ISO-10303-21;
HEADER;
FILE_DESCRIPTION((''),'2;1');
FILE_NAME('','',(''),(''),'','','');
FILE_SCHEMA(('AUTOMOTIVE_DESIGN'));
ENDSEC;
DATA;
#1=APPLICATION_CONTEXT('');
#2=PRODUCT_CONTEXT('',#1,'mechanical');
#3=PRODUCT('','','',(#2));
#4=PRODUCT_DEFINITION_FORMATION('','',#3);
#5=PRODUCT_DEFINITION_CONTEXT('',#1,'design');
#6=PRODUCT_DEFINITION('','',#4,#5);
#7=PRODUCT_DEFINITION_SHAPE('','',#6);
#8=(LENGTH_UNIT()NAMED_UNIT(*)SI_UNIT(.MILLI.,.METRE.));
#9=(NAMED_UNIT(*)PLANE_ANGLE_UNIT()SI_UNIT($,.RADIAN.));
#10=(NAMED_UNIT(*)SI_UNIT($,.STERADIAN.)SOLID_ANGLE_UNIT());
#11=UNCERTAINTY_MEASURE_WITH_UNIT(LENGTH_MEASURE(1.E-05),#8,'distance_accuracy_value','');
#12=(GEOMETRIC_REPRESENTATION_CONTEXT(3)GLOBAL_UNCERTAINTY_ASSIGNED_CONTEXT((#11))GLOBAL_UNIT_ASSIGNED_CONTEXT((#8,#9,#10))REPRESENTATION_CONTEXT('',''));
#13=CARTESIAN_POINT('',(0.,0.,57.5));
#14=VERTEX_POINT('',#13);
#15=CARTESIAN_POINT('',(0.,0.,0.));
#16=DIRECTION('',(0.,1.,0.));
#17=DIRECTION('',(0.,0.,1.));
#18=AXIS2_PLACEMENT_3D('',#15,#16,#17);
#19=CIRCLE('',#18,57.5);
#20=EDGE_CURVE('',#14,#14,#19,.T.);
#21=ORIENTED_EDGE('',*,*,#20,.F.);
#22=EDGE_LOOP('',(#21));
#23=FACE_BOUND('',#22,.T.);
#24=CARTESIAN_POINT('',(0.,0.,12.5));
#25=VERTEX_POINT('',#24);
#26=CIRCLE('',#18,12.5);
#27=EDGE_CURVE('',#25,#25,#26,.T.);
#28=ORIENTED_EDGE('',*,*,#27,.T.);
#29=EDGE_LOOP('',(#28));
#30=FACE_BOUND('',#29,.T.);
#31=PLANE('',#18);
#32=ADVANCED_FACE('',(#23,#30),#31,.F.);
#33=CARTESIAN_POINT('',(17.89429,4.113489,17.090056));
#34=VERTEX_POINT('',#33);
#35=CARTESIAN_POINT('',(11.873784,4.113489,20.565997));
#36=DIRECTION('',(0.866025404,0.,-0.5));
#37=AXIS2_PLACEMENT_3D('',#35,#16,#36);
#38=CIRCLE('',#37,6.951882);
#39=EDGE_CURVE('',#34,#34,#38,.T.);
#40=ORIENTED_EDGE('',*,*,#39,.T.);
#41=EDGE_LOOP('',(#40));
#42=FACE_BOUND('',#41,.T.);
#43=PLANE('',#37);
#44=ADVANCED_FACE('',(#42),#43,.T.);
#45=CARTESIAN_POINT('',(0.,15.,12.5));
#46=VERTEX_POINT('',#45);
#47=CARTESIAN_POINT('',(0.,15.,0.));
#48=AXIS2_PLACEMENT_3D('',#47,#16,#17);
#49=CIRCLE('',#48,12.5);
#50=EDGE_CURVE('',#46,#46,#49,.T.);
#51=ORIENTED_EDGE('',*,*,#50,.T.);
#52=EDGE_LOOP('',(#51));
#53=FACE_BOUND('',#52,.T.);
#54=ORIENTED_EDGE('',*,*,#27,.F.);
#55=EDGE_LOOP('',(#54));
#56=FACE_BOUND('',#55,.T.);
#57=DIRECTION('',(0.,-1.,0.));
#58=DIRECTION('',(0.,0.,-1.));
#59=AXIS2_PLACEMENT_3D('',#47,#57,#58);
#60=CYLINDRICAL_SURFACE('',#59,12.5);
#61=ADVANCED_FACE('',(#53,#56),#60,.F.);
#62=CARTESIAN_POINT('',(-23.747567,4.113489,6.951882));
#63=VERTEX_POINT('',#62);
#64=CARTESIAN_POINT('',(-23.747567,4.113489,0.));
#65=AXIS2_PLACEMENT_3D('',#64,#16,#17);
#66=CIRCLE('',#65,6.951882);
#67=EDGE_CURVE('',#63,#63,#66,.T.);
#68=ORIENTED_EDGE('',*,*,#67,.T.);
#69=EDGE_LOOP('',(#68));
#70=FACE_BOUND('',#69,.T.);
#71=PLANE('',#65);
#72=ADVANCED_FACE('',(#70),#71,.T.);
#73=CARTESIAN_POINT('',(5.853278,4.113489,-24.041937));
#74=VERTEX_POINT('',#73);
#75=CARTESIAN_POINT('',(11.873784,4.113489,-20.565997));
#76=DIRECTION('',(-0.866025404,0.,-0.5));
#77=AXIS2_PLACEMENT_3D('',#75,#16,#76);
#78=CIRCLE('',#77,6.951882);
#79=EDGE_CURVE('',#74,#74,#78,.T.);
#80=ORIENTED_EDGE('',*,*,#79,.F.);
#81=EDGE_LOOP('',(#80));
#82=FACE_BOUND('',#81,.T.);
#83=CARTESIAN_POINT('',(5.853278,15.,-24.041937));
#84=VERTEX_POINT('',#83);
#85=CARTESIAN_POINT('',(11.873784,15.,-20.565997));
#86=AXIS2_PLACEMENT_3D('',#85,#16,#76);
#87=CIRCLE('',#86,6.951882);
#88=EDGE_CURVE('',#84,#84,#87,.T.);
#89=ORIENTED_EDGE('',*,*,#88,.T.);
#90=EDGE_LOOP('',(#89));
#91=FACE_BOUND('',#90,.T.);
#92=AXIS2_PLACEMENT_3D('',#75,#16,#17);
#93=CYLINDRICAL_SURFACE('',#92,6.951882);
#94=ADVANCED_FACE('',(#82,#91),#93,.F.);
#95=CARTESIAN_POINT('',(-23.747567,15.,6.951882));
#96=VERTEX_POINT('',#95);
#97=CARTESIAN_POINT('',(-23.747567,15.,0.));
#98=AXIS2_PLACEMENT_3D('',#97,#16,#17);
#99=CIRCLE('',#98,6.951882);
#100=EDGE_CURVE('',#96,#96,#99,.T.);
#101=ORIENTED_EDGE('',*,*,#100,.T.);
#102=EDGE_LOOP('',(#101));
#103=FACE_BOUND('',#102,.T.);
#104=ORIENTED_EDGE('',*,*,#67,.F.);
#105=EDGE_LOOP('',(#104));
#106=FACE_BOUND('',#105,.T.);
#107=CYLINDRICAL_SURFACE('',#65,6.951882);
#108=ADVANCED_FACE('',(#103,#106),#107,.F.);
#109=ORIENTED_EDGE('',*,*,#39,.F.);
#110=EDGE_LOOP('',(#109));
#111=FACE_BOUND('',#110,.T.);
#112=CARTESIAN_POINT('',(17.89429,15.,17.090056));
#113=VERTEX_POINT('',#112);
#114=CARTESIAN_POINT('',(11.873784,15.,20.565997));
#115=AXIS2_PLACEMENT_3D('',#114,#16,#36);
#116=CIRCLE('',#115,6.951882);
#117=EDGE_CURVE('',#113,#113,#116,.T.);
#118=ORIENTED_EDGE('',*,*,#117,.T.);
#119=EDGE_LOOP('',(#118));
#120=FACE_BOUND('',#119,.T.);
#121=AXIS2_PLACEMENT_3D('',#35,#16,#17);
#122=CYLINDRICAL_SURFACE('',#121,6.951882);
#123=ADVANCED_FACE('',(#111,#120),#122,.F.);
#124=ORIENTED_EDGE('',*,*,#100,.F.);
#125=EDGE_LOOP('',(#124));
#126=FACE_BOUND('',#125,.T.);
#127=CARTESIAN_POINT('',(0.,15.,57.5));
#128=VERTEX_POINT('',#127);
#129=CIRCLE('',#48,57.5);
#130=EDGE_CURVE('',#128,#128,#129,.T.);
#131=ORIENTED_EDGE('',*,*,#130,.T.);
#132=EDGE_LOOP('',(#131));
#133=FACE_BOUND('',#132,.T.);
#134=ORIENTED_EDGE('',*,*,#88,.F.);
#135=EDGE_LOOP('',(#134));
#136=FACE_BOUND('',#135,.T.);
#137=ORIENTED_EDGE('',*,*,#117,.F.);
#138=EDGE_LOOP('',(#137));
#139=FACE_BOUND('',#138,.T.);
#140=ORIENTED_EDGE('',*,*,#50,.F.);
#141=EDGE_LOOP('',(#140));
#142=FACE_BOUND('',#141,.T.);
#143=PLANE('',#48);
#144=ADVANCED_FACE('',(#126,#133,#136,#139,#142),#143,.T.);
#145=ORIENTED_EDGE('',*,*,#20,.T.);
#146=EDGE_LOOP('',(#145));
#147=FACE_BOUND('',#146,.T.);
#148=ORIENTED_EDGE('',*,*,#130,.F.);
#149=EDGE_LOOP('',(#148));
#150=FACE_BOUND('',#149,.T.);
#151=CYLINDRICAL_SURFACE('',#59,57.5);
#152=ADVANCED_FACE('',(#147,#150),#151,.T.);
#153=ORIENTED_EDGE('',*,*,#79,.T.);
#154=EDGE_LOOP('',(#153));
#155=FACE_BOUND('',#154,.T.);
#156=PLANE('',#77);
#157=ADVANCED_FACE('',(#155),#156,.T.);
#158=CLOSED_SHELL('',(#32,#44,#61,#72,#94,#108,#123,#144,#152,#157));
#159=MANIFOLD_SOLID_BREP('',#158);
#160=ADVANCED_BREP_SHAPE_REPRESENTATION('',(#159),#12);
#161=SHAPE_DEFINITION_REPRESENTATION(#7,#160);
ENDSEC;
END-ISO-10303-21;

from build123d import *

# Parameters (mm, degrees)
SKETCH1_R           = 57.5
BOSS_EXTRUDE1_DEPTH = 15
SKETCH2_R           = 12.5
CUT_EXTRUDE1_DEPTH  = 83.689177043
SKETCH3_R           = 6.951881644
CUT_EXTRUDE2_DEPTH  = 10.886511335
CIRPATTERN1_COUNT   = 3


with BuildPart() as part:
    # Sketch1 → Boss-Extrude1 (new body)
    with BuildSketch(Plane(origin=(0, 0, 0), x_dir=(1, 0, 0), z_dir=(0, 1, 0))):
        Circle(SKETCH1_R)
    extrude(amount=BOSS_EXTRUDE1_DEPTH)

    # Sketch2 → Cut-Extrude1 (cut, through all)
    with BuildSketch(Plane(origin=(0, 0, 0), x_dir=(1, 0, 0), z_dir=(0, 1, 0))):
        Circle(SKETCH2_R)
    extrude(amount=CUT_EXTRUDE1_DEPTH, mode=Mode.SUBTRACT)

    # Sketch3 → Cut-Extrude2 (cut)
    with BuildSketch(Plane(origin=(0, 15, 0), x_dir=(1, 0, 0), z_dir=(0, 1, 0))):
        with Locations((-23.747567315, 0)):
            Circle(SKETCH3_R)
    cut_extrude2 = extrude(amount=-CUT_EXTRUDE2_DEPTH, mode=Mode.SUBTRACT)

    # CirPattern1: Cut-Extrude2 ×3 about axis
    cirpattern1_axis = Axis((0, 0, 0), (0, 1, 0))
    for i in range(1, CIRPATTERN1_COUNT):
        add(cut_extrude2.rotate(cirpattern1_axis, i * 360 / CIRPATTERN1_COUNT), mode=Mode.SUBTRACT)


solid = part.part
